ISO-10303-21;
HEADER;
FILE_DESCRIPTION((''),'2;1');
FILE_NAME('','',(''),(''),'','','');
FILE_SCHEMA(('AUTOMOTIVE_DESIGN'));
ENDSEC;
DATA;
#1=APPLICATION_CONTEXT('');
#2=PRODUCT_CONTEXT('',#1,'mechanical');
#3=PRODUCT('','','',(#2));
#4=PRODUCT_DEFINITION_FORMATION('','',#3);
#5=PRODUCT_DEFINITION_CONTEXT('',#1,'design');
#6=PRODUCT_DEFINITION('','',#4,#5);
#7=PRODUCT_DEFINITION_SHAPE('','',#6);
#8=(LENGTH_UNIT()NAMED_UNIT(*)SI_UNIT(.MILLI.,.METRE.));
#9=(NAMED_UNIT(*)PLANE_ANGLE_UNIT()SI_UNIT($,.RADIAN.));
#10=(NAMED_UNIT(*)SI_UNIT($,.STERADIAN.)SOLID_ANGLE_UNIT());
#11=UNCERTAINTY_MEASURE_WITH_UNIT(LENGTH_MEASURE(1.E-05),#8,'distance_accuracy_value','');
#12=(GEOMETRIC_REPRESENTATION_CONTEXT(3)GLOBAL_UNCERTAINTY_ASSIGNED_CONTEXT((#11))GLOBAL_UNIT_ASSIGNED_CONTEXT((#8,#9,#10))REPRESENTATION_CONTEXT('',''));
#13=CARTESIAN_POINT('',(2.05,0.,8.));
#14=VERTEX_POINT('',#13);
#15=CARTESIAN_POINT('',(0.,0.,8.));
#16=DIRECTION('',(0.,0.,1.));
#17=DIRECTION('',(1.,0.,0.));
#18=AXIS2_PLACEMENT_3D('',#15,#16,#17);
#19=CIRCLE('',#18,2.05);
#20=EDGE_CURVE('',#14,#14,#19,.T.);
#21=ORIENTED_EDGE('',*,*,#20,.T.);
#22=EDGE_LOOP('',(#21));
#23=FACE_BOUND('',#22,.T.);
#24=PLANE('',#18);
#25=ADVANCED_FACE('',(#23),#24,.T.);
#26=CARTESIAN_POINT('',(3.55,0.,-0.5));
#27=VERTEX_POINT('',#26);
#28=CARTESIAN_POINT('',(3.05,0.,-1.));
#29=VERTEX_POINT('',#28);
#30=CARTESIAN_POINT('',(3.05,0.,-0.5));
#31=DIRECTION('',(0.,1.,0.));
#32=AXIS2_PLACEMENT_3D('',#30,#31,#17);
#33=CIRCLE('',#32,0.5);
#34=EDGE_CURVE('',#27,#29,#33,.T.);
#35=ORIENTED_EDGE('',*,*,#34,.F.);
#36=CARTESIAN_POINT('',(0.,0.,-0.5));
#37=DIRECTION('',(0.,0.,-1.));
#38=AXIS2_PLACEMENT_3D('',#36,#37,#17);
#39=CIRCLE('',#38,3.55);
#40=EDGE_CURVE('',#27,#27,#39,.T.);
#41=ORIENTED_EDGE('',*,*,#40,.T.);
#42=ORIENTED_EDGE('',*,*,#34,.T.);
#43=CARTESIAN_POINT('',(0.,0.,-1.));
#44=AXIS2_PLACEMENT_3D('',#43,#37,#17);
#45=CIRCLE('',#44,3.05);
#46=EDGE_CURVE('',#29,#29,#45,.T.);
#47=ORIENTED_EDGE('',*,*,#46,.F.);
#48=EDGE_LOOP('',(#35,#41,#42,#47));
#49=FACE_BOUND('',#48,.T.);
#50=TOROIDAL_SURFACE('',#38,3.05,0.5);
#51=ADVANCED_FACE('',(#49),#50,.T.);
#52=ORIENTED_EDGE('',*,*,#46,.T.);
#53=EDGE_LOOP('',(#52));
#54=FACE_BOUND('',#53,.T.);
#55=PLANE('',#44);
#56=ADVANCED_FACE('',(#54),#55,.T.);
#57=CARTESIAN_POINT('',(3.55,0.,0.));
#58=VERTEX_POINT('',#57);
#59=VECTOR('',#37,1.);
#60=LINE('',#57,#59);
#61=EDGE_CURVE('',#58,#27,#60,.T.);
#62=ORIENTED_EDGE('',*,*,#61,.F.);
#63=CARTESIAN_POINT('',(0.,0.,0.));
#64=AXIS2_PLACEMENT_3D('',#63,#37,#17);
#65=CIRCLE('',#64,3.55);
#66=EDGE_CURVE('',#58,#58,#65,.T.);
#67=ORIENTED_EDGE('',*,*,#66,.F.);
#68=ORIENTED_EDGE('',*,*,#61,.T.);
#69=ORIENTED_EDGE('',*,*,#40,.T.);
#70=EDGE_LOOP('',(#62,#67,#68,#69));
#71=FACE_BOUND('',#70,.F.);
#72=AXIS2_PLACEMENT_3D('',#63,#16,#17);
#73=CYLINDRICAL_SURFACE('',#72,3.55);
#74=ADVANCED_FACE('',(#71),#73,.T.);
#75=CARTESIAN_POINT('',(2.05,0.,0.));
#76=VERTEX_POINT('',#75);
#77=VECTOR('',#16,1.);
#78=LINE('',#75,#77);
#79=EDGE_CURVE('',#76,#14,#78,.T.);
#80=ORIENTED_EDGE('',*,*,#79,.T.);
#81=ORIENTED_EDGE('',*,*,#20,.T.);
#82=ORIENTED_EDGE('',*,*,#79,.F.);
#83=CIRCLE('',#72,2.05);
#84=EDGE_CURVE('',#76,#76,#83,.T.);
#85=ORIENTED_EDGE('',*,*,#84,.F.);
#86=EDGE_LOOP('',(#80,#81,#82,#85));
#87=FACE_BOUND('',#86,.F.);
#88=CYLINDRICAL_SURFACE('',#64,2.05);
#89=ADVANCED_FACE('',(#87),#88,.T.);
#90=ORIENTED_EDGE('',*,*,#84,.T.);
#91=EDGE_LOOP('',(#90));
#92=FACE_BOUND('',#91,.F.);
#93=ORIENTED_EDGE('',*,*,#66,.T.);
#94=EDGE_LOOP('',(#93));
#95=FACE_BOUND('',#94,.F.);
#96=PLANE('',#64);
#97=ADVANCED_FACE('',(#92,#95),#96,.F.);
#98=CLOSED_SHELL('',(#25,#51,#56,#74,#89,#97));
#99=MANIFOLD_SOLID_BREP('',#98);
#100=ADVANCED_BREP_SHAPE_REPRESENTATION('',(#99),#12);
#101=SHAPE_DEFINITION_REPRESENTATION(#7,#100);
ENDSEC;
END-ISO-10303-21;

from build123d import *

# Parameters (mm, degrees)
F0_R     = 2.05
F1_DEPTH = 8
F2_R     = 3.55
F2_R_2   = 2.05
F3_DEPTH = 1
F4_R     = 0.5


with BuildPart() as f1:
    # F0 (on Top) → F1 (new body)
    with BuildSketch(Plane.XY):
        Circle(F0_R)
    extrude(amount=F1_DEPTH)

    # F2 (on face) → F3 (join)
    with BuildSketch(Plane(origin=(0, 0, 0), x_dir=(1, 0, 0), z_dir=(0, 0, -1))):
        Circle(F2_R)
        Circle(F2_R_2, mode=Mode.SUBTRACT)
        Circle(F2_R_2)
    extrude(amount=F3_DEPTH)

    # F4
    f4_edges = [f1.edges().sort_by_distance(p)[0] for p in [
        (-3.55, 0, -1),
    ]]
    fillet(f4_edges, radius=F4_R)


solid = f1.part
